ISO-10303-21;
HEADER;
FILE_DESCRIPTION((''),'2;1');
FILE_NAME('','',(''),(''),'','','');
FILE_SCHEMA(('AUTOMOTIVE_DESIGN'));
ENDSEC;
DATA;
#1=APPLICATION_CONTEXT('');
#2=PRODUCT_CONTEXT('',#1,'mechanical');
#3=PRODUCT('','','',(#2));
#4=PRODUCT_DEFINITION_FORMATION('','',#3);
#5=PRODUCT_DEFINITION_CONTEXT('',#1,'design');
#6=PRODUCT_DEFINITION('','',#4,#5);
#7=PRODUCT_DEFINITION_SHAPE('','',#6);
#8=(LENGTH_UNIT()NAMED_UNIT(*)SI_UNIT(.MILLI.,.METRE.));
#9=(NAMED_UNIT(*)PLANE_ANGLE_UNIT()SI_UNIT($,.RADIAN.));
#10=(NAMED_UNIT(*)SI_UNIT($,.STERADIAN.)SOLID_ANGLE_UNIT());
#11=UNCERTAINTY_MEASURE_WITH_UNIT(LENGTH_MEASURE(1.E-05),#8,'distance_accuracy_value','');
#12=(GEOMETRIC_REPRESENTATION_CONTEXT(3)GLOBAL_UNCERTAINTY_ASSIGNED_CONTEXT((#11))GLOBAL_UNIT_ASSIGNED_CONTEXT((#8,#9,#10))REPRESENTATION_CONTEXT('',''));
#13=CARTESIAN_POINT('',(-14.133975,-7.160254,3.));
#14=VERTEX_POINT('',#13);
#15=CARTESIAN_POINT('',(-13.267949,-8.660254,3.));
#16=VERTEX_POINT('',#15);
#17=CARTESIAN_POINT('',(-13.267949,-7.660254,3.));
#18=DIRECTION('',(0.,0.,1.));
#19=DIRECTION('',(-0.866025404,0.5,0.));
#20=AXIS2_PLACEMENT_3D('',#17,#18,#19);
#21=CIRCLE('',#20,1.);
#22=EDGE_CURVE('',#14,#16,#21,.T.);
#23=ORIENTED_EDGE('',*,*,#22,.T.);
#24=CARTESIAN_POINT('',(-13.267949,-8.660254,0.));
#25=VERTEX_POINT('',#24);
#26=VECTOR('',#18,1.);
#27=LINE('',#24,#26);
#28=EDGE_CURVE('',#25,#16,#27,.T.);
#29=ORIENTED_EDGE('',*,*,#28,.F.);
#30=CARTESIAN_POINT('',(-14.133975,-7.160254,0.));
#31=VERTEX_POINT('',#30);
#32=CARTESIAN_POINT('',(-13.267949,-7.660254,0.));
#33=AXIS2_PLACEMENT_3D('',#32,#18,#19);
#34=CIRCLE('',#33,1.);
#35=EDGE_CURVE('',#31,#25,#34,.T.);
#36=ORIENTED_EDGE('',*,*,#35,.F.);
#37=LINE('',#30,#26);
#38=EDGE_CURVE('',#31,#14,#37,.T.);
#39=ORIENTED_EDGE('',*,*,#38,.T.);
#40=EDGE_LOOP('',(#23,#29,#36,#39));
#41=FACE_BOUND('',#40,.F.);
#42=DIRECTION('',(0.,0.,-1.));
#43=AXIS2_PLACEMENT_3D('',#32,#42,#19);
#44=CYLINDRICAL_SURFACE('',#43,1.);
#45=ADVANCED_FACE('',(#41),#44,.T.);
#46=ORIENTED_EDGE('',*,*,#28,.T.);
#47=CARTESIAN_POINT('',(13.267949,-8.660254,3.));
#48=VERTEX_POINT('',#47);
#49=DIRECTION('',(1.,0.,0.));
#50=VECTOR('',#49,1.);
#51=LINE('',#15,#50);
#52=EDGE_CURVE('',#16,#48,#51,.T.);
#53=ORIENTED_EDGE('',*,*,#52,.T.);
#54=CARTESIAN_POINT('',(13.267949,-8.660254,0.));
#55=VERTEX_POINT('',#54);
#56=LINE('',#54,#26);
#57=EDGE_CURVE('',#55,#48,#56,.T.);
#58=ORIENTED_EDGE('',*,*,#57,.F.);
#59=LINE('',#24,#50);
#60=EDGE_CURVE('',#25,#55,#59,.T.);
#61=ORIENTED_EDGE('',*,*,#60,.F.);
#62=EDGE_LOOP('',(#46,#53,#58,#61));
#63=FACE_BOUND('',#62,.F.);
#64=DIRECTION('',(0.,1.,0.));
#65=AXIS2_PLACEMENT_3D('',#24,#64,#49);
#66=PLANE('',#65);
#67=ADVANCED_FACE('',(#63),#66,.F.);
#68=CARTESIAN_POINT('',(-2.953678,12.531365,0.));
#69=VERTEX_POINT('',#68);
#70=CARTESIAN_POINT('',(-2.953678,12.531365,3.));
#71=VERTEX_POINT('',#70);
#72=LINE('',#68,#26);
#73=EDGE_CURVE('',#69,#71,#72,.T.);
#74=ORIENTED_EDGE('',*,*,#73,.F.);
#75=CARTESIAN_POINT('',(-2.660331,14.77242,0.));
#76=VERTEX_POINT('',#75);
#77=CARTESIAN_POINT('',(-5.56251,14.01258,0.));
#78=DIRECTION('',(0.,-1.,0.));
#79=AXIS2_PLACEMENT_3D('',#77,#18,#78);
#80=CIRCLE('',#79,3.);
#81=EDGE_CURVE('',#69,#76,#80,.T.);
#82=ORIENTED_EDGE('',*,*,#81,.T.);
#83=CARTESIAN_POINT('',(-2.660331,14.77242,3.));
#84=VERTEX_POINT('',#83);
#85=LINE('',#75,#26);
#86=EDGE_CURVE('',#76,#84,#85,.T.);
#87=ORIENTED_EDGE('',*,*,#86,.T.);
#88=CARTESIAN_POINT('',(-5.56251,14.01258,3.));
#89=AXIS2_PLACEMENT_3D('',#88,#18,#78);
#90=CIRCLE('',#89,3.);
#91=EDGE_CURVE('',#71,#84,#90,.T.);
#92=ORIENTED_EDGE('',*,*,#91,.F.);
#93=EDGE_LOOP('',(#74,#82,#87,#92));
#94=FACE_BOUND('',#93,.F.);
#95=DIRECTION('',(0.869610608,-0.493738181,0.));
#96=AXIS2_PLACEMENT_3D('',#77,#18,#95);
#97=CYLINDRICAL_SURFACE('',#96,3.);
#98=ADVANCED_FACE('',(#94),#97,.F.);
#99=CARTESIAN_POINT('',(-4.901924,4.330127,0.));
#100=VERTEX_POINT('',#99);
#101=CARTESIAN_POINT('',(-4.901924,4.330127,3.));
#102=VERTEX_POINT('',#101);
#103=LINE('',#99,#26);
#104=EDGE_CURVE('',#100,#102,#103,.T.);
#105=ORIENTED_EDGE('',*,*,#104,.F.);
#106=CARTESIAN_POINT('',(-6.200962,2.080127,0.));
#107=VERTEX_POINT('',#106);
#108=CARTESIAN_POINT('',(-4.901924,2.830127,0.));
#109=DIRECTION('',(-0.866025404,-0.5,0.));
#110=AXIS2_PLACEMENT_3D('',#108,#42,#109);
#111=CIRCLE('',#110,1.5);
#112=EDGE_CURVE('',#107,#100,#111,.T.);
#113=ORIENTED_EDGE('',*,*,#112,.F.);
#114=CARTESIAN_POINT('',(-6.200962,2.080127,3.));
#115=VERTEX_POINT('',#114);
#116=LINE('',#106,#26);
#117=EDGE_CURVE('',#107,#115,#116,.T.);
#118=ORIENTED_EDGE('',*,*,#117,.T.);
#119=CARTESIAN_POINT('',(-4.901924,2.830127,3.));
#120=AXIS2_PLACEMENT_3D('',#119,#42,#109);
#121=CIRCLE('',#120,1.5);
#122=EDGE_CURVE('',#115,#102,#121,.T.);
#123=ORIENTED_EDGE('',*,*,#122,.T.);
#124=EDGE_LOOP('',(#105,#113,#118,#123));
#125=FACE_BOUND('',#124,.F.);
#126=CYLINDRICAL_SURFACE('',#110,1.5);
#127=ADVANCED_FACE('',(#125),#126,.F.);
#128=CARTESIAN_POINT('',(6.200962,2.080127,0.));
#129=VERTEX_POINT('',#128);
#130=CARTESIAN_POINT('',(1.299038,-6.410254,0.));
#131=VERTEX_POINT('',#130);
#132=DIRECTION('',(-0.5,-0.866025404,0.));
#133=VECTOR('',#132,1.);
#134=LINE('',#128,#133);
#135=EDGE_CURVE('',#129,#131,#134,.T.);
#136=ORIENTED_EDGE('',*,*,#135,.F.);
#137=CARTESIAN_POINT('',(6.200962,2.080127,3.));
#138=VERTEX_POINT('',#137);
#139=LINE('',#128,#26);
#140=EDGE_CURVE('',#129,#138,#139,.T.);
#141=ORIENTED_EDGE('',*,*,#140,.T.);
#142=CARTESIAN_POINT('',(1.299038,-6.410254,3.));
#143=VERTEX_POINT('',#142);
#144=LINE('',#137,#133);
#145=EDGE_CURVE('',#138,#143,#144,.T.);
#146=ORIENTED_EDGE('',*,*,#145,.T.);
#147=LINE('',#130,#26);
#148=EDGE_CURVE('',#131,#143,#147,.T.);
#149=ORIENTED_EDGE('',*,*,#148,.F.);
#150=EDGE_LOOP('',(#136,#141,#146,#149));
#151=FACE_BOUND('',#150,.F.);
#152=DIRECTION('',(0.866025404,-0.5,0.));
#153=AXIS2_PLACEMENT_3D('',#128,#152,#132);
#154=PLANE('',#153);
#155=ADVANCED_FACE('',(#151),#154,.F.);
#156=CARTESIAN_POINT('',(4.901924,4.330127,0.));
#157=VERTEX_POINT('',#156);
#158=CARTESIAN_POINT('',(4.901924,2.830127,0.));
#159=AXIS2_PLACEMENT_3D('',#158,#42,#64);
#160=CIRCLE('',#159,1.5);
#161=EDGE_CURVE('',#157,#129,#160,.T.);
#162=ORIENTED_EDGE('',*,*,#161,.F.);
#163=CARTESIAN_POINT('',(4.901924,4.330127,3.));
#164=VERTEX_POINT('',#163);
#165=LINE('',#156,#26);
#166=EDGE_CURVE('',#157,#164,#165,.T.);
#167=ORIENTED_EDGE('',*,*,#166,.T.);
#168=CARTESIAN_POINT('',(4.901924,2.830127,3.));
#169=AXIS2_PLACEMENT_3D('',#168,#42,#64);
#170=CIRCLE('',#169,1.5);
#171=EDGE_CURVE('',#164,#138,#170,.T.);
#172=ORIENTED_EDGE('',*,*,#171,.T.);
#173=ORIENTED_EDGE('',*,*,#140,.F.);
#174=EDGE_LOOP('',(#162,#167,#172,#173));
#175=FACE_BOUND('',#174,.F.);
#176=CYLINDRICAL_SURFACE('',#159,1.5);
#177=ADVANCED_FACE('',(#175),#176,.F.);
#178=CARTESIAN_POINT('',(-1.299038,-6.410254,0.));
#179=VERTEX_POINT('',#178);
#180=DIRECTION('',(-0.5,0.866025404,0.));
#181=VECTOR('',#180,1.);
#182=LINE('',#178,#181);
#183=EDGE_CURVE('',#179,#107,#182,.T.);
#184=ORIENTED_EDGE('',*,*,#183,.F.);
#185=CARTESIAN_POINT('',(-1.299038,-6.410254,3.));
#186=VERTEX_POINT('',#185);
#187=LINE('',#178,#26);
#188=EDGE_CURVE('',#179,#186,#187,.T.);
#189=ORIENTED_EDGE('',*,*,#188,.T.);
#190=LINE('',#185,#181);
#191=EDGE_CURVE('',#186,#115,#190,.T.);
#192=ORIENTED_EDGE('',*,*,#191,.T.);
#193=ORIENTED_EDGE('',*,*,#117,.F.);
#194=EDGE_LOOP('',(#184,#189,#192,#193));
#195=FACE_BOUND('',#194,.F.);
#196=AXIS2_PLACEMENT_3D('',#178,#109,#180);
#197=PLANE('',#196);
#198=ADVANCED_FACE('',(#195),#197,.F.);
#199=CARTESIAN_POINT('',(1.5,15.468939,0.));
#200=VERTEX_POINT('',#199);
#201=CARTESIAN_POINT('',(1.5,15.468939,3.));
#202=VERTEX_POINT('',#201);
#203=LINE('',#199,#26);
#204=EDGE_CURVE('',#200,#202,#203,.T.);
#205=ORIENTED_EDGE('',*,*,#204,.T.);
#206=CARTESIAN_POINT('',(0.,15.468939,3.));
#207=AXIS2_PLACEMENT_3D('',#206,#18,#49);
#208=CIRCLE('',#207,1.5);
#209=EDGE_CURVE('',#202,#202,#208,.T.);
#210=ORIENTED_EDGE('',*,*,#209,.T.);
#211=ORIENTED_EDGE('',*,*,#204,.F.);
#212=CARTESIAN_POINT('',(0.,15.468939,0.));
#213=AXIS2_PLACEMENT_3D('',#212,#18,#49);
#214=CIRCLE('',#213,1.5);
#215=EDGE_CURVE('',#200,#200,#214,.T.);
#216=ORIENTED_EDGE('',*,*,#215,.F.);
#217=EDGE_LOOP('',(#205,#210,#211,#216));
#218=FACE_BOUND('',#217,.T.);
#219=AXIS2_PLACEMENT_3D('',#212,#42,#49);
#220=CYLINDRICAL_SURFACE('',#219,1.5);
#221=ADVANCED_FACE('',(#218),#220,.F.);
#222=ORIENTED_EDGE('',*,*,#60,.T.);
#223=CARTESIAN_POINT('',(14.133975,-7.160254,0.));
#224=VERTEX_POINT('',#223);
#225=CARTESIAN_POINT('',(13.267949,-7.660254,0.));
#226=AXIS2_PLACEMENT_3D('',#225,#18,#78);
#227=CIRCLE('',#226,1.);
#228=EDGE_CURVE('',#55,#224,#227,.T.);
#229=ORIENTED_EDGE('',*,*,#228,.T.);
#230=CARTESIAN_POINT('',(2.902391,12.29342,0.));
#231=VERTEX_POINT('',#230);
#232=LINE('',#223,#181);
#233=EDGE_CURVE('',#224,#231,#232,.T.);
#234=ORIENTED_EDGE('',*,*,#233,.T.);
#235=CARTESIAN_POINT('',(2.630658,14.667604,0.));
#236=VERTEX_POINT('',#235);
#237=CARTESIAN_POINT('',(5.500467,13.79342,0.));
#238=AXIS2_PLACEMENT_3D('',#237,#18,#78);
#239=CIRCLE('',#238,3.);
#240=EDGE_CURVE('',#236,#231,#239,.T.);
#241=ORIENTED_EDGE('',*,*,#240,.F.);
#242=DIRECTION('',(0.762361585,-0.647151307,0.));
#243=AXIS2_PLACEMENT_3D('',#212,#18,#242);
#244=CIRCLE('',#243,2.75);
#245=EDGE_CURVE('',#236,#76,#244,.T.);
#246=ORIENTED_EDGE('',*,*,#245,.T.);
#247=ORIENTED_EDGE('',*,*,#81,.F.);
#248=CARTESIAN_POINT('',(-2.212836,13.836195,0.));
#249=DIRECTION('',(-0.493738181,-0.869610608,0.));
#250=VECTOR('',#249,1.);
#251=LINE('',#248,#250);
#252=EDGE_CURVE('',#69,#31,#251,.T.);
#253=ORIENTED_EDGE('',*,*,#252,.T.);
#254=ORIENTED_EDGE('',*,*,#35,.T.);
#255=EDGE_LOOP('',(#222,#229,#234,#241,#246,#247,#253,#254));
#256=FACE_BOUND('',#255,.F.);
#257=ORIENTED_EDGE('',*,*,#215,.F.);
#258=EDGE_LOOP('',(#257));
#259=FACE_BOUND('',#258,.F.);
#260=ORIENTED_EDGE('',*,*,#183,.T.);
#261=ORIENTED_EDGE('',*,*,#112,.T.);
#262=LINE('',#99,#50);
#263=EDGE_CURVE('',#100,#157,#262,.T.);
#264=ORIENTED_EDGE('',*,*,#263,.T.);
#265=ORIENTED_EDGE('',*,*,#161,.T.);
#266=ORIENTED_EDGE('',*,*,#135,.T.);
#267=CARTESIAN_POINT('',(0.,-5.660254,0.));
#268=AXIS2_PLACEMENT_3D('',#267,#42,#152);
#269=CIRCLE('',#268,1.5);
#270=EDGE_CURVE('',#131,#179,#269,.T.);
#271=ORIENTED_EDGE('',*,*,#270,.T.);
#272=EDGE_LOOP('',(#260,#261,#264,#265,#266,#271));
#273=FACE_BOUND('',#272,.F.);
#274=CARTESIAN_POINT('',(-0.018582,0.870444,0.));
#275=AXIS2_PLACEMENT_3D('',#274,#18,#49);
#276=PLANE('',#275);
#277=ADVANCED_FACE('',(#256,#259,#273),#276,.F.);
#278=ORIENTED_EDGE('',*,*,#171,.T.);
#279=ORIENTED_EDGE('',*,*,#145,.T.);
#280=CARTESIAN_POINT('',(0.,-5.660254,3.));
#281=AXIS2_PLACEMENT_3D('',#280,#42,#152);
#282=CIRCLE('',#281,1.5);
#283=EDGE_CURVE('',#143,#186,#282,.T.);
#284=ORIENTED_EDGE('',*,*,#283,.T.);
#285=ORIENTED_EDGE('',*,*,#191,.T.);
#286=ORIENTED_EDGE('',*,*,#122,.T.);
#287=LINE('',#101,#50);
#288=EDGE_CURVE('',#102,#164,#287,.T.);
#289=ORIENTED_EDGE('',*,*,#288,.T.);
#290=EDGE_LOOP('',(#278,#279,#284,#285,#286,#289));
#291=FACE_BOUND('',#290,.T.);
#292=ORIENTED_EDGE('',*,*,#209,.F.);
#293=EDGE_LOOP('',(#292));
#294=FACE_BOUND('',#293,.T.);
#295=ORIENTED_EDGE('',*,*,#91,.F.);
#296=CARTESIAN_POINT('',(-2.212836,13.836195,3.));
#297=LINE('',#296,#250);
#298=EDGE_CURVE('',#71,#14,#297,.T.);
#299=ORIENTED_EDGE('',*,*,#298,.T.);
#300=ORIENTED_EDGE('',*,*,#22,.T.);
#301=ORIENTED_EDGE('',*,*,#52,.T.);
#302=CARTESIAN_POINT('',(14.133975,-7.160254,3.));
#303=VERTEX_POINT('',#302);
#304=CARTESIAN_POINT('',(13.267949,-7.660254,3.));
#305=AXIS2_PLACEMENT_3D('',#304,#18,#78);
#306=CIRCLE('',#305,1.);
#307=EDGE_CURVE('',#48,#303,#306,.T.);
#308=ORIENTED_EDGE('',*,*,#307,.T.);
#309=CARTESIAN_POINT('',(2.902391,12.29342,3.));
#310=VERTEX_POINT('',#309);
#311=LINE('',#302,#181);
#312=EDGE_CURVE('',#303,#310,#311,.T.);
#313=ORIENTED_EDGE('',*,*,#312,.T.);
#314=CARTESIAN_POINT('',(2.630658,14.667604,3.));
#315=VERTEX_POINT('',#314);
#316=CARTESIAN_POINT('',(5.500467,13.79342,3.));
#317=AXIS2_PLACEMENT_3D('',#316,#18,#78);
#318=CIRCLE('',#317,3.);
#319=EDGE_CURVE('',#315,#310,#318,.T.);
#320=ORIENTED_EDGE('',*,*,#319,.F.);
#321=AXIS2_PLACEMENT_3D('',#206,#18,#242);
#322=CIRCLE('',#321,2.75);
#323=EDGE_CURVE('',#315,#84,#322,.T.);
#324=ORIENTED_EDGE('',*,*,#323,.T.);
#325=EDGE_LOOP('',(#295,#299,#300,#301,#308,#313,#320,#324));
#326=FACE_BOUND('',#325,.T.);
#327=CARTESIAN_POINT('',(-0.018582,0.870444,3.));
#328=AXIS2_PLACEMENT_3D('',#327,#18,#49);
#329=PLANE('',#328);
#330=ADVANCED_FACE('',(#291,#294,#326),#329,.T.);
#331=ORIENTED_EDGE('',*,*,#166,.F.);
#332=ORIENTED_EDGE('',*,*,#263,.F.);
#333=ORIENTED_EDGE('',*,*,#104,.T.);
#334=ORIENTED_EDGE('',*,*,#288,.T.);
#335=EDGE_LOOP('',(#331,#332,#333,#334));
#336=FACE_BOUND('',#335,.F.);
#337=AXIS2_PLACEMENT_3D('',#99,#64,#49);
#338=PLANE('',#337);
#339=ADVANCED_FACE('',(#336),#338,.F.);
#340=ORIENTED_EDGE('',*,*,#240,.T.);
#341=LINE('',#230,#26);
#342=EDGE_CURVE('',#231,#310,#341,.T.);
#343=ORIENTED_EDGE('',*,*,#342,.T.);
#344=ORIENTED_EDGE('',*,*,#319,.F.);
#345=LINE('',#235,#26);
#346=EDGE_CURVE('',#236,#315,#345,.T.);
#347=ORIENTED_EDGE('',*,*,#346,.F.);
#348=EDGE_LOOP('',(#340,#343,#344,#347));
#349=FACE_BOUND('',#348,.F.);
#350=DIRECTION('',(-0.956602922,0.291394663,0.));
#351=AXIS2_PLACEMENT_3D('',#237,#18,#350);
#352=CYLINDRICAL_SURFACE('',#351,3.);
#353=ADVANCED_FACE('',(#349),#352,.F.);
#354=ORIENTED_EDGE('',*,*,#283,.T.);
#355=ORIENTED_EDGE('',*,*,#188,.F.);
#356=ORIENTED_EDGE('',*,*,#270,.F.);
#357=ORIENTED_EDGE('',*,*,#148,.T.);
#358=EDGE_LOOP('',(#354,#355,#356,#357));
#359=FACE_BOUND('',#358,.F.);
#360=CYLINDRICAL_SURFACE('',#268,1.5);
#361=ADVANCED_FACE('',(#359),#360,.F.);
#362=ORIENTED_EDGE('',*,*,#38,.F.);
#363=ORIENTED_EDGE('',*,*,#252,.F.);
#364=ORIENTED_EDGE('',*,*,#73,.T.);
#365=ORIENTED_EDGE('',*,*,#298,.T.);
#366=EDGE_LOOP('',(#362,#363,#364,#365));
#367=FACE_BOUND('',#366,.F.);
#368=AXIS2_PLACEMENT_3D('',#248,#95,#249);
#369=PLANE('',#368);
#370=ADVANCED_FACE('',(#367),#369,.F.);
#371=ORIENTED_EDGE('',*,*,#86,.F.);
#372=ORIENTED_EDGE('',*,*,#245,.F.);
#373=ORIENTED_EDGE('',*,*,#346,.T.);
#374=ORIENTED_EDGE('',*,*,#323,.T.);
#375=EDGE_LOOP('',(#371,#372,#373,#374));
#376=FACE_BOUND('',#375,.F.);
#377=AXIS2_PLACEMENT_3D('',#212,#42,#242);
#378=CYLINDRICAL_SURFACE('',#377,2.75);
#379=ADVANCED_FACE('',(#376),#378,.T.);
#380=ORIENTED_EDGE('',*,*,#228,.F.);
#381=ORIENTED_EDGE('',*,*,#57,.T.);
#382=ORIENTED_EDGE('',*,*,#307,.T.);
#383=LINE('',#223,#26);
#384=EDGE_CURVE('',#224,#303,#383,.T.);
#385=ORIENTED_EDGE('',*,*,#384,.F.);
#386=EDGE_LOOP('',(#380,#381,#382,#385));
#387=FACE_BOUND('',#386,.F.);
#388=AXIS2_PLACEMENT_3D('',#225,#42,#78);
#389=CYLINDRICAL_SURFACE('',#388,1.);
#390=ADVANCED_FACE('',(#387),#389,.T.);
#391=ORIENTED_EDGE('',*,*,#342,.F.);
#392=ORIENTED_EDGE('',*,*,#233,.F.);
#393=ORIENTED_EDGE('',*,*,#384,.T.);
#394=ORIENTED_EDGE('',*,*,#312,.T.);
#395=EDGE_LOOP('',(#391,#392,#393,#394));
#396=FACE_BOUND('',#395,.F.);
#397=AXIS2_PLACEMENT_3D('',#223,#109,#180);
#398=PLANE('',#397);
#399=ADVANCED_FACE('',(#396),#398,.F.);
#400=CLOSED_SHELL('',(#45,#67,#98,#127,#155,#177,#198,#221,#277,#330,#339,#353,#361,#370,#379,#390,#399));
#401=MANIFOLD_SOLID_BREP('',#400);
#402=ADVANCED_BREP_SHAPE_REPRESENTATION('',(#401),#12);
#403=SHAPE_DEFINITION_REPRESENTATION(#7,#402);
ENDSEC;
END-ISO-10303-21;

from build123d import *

# Parameters (mm, degrees)
F0_R     = 1.5
F1_DEPTH = 3
F2_R     = 3


# Not quite as in the source:
# - a feature names something its author has since deleted; it is built from what else it names


with BuildPart() as f1:
    # F0 (on Top) → F1 (new body)
    with BuildSketch(Plane.XY):
        with BuildLine():
            ThreePointArc((-14.1339745962, -7.1602540378), (-14.1339745962, -8.1602540378), (-13.2679491924, -8.6602540378))
            Line((-13.2679491924, -8.6602540378), (13.2679491924, -8.6602540378))
            ThreePointArc((13.2679491924, -8.6602540378), (14.1339745962, -8.1602540378), (14.1339745962, -7.1602540378))
            Line((14.1339745962, -7.1602540378), (2.096494358, 13.6892733298))
            ThreePointArc((2.096494358, 13.6892733298), (0.0937033826, 18.2173425378), (-2.2128362603, 13.8361945924))
            Line((-2.2128362603, 13.8361945924), (-14.1339745962, -7.1602540378))
        make_face()
        with BuildLine():
            Line((-4.9019237886, 4.3301270189), (4.9019237886, 4.3301270189))
            ThreePointArc((4.9019237886, 4.3301270189), (6.2009618943, 3.5801270189), (6.2009618943, 2.0801270189))
            Line((6.2009618943, 2.0801270189), (1.2990381057, -6.4102540378))
            ThreePointArc((1.2990381057, -6.4102540378), (0, -7.1602540378), (-1.2990381057, -6.4102540378))
            Line((-1.2990381057, -6.4102540378), (-6.2009618943, 2.0801270189))
            ThreePointArc((-6.2009618943, 2.0801270189), (-6.2009618943, 3.5801270189), (-4.9019237886, 4.3301270189))
        make_face(mode=Mode.SUBTRACT)
        with Locations((0, 15.468939424)):
            Circle(F0_R, mode=Mode.SUBTRACT)
    extrude(amount=F1_DEPTH)

    # F2
    f2_edges = [f1.edges().sort_by_distance(p)[0] for p in [
        (-2.212836, 13.836195, 1.5),
        (2.096494, 13.689273, 1.5),
    ]]
    fillet(f2_edges, radius=F2_R)


solid = f1.part
